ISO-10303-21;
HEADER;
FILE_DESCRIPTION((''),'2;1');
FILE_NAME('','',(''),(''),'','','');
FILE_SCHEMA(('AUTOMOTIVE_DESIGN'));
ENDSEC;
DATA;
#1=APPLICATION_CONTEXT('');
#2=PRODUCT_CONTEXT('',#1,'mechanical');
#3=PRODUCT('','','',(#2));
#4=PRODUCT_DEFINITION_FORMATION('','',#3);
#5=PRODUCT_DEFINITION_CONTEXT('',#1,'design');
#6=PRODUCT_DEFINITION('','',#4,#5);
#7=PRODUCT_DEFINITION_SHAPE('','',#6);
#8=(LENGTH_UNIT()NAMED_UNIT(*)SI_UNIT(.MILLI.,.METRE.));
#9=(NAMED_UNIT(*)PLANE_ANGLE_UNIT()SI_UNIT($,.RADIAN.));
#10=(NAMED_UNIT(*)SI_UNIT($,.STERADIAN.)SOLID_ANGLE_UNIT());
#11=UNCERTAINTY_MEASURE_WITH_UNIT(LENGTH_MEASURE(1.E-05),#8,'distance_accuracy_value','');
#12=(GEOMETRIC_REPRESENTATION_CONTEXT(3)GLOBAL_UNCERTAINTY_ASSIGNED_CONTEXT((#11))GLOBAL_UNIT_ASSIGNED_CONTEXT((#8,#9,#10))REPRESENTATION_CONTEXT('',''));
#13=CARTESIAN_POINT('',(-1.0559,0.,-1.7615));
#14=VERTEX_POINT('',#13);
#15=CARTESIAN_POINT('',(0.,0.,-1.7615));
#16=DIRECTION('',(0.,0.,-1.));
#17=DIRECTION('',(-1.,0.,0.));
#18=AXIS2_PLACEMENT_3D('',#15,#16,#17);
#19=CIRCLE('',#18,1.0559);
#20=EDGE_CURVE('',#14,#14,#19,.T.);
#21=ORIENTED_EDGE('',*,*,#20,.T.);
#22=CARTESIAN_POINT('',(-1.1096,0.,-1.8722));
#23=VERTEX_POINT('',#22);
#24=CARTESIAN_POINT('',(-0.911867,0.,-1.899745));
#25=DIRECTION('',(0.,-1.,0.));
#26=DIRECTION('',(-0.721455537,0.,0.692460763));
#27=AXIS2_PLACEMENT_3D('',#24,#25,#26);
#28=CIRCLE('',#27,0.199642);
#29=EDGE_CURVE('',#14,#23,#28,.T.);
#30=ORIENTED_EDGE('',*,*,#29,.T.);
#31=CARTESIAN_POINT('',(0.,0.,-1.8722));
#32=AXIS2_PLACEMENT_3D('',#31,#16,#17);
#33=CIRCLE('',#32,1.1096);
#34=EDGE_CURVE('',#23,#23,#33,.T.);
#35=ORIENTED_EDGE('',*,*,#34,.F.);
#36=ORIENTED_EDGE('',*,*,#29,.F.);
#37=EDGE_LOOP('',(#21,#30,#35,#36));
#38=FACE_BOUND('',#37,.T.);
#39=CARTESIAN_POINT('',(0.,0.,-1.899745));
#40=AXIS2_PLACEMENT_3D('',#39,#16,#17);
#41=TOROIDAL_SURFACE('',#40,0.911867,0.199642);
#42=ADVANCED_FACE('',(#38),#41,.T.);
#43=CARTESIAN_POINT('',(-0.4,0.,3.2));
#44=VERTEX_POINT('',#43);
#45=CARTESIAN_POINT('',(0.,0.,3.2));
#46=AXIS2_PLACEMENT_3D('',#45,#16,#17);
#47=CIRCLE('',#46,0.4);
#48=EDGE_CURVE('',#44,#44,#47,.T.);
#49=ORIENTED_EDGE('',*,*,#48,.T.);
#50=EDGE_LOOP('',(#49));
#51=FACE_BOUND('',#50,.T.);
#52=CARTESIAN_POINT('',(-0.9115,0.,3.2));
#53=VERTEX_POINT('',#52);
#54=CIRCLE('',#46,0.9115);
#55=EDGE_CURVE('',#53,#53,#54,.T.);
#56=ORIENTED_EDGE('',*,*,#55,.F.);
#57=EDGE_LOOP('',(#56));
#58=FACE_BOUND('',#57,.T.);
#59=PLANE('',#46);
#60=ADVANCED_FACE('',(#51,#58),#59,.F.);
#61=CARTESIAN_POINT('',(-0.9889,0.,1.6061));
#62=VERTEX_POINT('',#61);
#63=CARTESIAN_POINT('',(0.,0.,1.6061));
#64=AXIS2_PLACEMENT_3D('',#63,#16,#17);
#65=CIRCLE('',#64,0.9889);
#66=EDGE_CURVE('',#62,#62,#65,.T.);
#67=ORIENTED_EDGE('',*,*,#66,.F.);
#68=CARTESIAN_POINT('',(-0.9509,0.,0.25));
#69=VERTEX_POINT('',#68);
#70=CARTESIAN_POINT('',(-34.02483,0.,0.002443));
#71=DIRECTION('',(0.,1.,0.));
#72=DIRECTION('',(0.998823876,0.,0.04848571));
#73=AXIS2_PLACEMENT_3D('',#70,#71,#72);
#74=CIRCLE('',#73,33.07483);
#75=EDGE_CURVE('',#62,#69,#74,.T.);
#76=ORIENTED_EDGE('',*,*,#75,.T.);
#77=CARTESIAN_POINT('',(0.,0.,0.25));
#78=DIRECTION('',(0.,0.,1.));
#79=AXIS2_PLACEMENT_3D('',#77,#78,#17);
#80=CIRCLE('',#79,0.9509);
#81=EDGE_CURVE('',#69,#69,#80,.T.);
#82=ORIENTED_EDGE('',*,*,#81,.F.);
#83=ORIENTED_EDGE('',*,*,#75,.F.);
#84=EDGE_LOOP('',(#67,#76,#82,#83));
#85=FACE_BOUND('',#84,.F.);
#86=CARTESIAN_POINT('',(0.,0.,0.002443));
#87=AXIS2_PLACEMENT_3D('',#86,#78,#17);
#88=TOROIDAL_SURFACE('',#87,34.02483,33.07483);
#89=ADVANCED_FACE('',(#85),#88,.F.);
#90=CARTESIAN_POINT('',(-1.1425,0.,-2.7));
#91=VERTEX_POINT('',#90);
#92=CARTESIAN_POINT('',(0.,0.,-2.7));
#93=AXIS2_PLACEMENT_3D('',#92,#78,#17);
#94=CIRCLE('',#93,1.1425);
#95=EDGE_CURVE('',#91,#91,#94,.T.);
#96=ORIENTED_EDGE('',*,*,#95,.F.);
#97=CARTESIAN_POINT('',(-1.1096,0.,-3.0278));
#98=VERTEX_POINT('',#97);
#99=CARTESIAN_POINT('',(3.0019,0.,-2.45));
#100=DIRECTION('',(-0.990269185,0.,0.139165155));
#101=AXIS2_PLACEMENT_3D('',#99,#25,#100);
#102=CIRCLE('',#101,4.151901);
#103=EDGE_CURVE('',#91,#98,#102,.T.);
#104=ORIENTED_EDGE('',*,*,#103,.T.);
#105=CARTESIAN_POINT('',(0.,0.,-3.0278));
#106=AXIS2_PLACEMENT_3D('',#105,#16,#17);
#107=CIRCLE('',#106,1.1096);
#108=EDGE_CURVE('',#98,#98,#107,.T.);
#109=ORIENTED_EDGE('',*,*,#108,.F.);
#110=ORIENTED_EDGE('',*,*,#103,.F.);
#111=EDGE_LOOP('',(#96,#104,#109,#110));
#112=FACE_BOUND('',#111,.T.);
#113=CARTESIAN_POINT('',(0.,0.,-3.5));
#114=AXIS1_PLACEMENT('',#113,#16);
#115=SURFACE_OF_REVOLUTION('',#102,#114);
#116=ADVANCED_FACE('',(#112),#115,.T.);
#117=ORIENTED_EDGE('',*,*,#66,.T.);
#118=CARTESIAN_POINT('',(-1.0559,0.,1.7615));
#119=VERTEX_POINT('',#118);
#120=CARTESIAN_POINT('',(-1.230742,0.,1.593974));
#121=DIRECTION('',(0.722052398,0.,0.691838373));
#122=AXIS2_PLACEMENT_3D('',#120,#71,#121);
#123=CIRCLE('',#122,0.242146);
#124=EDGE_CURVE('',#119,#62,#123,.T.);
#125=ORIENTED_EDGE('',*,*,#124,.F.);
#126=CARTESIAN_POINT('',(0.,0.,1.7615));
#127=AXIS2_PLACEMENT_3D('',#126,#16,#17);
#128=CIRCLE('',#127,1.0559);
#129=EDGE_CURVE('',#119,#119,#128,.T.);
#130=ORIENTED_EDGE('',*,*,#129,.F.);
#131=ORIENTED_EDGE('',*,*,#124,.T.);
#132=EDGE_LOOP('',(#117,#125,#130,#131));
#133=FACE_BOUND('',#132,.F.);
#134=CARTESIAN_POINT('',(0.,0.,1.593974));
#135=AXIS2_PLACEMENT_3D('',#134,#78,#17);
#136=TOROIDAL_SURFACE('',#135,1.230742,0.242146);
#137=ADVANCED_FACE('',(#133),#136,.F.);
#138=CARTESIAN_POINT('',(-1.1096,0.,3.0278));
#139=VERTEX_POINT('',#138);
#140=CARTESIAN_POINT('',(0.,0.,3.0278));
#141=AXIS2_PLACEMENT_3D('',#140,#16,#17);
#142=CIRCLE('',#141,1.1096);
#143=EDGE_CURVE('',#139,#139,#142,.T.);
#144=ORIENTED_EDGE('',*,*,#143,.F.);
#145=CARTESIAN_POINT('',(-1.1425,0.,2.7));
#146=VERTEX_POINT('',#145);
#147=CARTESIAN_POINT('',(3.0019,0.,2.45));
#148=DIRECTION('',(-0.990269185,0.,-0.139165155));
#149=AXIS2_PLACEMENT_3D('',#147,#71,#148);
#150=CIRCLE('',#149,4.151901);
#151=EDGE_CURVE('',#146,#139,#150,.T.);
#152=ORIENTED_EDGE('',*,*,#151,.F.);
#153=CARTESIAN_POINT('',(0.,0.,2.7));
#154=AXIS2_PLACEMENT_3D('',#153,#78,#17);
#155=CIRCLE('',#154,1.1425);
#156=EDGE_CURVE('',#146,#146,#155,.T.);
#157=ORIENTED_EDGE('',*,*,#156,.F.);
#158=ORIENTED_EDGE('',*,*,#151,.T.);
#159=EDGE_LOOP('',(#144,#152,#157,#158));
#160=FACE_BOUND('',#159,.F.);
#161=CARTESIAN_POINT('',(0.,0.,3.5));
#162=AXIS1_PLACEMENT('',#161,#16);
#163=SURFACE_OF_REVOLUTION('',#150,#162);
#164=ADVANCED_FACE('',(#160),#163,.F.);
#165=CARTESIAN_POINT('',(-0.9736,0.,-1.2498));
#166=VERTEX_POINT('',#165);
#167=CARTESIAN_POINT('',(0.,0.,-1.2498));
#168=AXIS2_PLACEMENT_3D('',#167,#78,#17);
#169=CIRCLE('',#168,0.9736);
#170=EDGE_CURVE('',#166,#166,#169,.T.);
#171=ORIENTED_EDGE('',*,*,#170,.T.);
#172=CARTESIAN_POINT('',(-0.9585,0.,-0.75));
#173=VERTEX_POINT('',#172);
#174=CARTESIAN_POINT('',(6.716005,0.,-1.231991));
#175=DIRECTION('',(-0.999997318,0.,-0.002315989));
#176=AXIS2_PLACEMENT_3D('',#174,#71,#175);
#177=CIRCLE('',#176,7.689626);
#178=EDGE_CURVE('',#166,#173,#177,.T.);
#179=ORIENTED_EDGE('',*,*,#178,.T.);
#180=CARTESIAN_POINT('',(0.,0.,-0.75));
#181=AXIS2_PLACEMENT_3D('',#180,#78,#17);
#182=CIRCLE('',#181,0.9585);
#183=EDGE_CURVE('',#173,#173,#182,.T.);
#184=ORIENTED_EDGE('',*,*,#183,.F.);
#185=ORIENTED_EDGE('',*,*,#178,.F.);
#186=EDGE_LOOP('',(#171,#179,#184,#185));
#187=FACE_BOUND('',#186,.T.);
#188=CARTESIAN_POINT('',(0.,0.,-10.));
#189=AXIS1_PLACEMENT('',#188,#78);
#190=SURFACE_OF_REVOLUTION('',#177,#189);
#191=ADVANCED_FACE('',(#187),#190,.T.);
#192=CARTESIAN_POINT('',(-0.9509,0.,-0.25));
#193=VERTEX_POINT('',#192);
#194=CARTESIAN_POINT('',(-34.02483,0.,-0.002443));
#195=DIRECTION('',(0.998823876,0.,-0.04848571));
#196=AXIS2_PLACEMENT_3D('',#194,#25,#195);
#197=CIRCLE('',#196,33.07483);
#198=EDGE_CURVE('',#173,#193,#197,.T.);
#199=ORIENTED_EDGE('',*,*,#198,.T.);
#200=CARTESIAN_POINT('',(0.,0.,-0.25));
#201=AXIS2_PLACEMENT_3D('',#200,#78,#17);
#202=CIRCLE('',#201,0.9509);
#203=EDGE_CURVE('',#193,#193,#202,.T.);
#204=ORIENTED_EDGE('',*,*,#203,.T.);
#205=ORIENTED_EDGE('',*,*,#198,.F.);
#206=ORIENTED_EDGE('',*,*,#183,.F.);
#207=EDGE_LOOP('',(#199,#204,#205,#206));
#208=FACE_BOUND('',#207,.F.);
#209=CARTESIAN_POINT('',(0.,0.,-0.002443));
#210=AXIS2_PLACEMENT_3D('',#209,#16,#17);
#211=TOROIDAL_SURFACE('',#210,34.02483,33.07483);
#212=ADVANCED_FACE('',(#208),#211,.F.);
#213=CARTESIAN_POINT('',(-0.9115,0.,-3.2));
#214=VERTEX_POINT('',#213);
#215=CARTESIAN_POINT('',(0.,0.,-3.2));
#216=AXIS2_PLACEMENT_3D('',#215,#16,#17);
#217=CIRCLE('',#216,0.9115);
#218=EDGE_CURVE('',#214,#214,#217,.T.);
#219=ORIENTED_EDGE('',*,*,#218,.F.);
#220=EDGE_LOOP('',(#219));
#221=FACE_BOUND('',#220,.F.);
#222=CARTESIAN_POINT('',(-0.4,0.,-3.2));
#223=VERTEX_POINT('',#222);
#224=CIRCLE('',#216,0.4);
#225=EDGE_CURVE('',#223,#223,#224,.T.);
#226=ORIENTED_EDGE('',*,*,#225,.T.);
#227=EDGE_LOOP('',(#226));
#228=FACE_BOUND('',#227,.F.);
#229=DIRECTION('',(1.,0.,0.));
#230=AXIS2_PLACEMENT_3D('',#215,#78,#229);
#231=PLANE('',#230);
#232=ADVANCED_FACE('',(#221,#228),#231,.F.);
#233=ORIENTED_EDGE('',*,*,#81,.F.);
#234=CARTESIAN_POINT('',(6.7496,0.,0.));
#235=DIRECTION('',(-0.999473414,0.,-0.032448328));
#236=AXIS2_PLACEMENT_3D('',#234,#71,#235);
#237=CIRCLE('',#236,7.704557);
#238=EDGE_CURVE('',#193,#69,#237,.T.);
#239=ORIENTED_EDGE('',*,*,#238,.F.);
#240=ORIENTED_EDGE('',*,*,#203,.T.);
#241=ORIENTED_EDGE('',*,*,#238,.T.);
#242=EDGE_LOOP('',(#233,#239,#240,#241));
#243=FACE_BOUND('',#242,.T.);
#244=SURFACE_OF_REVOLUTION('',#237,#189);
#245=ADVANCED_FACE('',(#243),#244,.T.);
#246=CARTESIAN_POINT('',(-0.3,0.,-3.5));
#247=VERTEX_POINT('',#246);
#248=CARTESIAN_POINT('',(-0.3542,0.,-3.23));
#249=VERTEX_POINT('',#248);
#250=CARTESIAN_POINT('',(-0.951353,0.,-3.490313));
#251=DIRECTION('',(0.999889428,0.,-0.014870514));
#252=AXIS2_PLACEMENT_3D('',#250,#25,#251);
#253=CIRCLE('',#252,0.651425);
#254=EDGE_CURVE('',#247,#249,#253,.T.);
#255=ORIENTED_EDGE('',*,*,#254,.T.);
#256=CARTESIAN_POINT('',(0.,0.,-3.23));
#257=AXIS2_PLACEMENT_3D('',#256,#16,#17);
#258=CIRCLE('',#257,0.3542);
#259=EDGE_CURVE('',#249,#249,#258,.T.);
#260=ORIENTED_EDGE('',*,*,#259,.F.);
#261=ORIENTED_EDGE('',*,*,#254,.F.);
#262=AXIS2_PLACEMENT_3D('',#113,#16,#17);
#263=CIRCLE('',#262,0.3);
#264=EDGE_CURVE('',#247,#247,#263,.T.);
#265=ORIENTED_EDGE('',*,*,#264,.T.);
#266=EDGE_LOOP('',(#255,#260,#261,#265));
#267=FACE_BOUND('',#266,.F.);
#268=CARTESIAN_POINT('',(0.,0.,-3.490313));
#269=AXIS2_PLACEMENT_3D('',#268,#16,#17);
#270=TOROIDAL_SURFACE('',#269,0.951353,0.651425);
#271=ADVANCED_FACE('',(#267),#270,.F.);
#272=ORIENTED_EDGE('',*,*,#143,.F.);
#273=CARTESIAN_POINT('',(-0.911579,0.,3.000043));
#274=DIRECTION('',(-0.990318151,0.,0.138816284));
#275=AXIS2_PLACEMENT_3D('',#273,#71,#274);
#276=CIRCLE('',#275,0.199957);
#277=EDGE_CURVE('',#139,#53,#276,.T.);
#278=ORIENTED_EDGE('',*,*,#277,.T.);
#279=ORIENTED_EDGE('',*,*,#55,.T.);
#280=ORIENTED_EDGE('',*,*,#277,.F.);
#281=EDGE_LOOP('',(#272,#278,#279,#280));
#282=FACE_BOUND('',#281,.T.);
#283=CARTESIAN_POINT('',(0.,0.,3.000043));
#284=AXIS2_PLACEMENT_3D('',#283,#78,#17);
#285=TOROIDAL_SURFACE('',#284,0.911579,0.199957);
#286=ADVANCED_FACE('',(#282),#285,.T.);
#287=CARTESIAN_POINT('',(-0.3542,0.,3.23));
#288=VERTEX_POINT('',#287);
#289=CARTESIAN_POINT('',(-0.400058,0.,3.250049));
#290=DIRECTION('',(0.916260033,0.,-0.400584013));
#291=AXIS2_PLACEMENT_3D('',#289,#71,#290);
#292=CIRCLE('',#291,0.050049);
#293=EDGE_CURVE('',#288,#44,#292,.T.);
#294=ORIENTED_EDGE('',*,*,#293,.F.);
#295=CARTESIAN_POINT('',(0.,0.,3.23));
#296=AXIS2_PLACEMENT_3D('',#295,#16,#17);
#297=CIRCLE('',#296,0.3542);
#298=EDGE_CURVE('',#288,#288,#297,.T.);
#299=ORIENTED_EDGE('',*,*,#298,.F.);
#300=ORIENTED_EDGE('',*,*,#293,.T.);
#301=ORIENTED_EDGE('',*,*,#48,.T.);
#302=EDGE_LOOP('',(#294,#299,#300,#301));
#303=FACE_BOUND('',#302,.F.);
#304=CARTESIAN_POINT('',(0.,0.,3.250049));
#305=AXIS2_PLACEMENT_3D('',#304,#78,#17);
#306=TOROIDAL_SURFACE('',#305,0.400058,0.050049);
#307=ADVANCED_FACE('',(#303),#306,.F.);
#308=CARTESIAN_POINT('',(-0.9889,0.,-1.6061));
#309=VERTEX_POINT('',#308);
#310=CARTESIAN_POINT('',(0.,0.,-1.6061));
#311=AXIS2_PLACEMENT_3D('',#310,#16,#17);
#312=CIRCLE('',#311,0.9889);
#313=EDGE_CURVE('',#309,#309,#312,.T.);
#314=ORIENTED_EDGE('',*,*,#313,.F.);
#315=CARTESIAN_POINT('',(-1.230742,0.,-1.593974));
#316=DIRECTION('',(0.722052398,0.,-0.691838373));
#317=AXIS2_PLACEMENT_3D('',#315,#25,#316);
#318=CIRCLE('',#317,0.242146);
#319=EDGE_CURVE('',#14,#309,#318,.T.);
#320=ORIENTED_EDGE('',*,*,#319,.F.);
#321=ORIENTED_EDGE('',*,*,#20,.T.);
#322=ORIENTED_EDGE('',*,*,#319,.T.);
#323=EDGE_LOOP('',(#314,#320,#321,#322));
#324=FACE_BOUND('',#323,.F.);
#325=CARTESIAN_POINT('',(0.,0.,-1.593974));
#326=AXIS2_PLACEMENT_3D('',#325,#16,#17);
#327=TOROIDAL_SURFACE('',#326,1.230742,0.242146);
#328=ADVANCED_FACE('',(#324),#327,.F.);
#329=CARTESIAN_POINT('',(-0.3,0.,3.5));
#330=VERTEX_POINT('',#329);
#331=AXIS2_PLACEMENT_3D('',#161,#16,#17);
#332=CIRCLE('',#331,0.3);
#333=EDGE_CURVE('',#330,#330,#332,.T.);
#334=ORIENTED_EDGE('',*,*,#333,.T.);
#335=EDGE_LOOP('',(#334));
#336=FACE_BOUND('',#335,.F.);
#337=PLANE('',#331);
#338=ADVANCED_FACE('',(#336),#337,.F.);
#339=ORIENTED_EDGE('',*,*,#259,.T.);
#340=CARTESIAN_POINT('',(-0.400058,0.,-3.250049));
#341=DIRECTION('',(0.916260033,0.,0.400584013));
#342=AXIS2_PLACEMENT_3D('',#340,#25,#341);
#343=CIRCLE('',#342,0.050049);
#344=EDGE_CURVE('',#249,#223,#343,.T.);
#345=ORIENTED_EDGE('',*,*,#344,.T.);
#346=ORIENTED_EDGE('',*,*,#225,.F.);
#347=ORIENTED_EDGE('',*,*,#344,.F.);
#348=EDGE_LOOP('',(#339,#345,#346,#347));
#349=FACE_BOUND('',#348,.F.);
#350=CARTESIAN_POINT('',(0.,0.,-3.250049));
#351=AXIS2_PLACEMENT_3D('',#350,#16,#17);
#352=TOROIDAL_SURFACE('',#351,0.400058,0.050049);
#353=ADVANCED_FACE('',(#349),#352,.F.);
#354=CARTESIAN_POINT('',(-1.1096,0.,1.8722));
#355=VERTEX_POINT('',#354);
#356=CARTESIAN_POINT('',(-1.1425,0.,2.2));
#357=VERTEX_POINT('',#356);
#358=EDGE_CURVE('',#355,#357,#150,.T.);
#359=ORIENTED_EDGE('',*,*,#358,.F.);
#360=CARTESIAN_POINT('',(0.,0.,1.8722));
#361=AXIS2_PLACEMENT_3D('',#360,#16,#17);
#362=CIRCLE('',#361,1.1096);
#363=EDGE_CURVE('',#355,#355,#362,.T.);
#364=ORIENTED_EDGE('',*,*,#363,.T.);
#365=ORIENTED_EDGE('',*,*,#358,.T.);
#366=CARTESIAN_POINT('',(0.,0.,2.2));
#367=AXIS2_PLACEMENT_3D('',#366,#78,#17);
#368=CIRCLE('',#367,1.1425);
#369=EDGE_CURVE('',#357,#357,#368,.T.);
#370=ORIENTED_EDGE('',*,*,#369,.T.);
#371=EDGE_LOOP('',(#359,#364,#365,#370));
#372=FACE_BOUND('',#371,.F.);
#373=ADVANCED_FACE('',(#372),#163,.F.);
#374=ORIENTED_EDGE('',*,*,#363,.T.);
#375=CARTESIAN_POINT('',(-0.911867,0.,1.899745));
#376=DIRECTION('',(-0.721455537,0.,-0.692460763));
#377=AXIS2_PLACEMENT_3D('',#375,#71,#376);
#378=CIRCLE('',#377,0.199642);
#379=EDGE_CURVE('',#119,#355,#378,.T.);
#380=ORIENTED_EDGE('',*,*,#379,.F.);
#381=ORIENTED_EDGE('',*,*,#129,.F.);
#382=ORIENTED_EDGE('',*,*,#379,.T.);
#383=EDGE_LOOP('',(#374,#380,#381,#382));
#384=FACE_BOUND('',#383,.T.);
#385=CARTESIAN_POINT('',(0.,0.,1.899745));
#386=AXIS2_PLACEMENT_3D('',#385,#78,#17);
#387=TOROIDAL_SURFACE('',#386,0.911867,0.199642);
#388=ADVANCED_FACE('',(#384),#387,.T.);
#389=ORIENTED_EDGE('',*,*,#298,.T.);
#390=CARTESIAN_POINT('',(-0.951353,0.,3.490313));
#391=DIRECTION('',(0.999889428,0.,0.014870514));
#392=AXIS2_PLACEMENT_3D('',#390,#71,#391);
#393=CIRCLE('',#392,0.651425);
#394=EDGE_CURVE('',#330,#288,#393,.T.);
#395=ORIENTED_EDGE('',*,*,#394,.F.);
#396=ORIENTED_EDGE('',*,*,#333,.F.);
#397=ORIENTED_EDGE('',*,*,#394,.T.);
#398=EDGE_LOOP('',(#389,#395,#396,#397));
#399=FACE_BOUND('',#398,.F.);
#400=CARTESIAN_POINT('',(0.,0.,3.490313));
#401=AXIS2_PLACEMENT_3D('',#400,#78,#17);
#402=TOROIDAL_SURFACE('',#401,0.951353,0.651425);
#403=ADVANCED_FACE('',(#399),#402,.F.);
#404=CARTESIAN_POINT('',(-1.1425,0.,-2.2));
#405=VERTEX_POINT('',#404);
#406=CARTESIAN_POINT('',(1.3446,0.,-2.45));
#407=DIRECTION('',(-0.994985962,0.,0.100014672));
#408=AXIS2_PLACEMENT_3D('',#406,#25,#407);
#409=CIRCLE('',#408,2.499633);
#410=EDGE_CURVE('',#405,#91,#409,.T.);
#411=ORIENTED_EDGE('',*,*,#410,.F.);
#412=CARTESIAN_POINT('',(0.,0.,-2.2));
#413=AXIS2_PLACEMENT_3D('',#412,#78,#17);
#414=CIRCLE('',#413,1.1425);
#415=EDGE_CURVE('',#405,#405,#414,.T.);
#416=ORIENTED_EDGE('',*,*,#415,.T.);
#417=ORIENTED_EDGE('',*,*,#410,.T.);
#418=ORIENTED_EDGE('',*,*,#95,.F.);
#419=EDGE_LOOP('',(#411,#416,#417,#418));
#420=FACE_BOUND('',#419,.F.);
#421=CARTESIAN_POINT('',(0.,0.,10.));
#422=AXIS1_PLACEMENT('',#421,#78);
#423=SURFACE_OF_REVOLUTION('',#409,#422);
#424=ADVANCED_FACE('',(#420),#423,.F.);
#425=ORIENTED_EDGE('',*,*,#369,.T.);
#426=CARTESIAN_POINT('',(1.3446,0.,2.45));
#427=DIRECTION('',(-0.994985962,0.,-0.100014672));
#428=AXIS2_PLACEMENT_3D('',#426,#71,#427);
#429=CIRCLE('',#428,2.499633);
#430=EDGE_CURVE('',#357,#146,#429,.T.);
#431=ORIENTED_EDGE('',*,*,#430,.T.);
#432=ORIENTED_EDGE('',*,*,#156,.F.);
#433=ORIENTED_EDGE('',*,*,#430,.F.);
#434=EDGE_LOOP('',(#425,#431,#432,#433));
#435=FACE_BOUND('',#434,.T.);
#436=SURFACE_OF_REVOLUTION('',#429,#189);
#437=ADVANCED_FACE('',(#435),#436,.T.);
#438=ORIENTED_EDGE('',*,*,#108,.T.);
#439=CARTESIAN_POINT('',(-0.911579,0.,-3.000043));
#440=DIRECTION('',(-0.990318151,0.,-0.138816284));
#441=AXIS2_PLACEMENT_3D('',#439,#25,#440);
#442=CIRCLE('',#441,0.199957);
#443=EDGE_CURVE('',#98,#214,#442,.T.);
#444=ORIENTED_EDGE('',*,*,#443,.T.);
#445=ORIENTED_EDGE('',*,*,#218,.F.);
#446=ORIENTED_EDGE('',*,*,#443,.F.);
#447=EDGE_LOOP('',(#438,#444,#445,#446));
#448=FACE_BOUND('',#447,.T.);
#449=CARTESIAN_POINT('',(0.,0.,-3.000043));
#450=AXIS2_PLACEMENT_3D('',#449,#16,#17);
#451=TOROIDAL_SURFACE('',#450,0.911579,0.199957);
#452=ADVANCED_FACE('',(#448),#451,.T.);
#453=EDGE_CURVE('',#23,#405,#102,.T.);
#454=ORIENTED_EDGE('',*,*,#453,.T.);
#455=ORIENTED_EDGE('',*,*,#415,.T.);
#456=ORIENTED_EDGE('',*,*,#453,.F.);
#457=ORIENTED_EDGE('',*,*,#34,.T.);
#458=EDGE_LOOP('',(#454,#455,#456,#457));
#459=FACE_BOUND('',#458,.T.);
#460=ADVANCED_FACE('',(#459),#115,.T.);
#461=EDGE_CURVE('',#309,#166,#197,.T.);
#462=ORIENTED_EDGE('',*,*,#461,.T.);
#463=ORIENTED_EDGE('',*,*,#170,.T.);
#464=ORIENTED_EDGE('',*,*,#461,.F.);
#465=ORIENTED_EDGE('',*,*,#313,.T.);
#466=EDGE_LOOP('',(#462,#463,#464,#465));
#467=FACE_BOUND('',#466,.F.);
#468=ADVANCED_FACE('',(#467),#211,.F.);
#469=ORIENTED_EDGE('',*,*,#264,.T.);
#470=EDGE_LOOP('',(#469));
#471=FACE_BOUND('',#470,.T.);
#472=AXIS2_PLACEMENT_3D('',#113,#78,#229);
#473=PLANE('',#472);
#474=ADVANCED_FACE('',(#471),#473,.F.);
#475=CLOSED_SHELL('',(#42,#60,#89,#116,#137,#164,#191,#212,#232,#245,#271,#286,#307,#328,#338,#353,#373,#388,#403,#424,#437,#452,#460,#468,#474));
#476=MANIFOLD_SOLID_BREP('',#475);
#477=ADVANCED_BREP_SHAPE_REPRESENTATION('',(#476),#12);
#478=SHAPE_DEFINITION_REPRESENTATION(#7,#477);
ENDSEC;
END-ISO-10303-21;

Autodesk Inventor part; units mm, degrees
ref_plane "YZ Plane" through (0, 0, 0) normal (1, 0, 0) x (0, 1, 0)
ref_plane "XZ Plane" through (0, 0, 0) normal (0, 1, 0) x (-1, 0, 0)
ref_plane "XY Plane" through (0, 0, 0) normal (0, 0, 1) x (1, 0, 0)
sketch "Skizze5" plane through (0, 0, 0) normal (0, 1, 0) x (-1, 0, 0)
  line L0 (0, 4.4678) -> (0, 0)
  line L1 (0.95, 0) -> (0, 0)
  line L2 (0.4, 3.2) -> (0.9115, 3.2)
  line L3 (0.9115, 1.7) -> (0.4352, 1.7) construction
  arc A0 (1.1096, 3.0278) -> (0.9115, 3.2) centre (0.9115, 3) ccw
  arc A1 (0.9115, 1.7) -> (1.0559, 1.7615) centre (0.9115, 1.9) ccw construction
  arc A2 (1.1096, 1.8722) -> (1.1096, 3.0278) centre (-3.0019, 2.45) ccw
  line L4 (1.15, 2.45) -> (-3.0019, 2.45) construction
  line L5 (0.9115, 1.9) -> (0.9115, 3) construction
  arc A3 (1.0559, 1.7615) -> (1.1096, 1.8722) centre (0.9115, 1.9) ccw
  arc A4 (0.3542, 3.23) -> (0.4, 3.2) centre (0.4, 3.25) ccw
  line L6 (0.9115, 3) -> (1.1096, 3.0278) construction
  arc A5 (1.0559, 1.7615) -> (0.9889, 1.6061) centre (1.2301, 1.5944) ccw
  line L7 (0.3, 3.5) -> (0, 3.5)
  line L8 (0, 3.5) -> (0, 0)
  arc A6 (0.3, 3.5) -> (0.3542, 3.23) centre (0.9523, 3.4904) ccw
  arc A7 (0.9889, 1.6061) -> (0.95, 0) centre (34.092, 0) ccw
  line L9 (34.092, 0) -> (0.95, 0) construction
  dimension "d12" = 1.5
  dimension "d14" = 0.2
  dimension "d16" = 1.9
  dimension "d17" = 2.3
  dimension "d18" = 0.75
  dimension "d21" = 98
  dimension "d22" = 0.3
  dimension "d23" = 3.2
revolve "Umdrehung1" add sketch "Skizze5" angle 360 about axis through (0, 0, 4.4678) along (0, 0, -1)
mirror "Spiegeln2" about plane through (0, 0, 0) normal (0, 0, 1) of "Umdrehung1"
sketch "Skizze6" plane through (0, 0, 0) normal (0, 1, 0) x (-1, 0, 0)
  arc A0 (1.1096, 1.8722) -> (1.1096, 3.0278) centre (-3.0019, 2.45) ccw projected
  arc A1 (1.1425, 2.2) -> (1.1425, 2.7) centre (-1.3446, 2.45) ccw
  line L0 (-3.0019, 2.45) -> (-1.3446, 2.45)
  line L1 (0, -4.9) -> (0, 4.9) projected
  point P0 (0, 0)
  dimension "d25" = 0.5
  dimension "d26" = 0.005
revolve "Umdrehung2" add sketch "Skizze6" angle 360 about axis through (0, 0, -10) along (0, 0, 1)
mirror "Spiegeln3" about plane through (0, 0, 0) normal (0, 0, 1) of "Umdrehung2"
sketch "Skizze7" plane through (0, 0, 0) normal (0, 1, 0) x (-1, 0, 0)
  arc A0 (0.9889, 1.6061) -> (0.9889, -1.6061) centre (34.092, 0) ccw projected
  arc A1 (0.9509, -0.25) -> (0.9509, 0.25) centre (-6.7496, 0) ccw
  line L0 (-6.7496, 0) -> (0, 0)
  line L1 (0.9509, 0.25) -> (0.9509, -0.25) construction
  line L2 (0, -4.9) -> (0, 4.9) projected
  dimension "d28" = 0.005
  dimension "d29" = 0.5
revolve "Umdrehung3" add sketch "Skizze7" angle 360 about axis through (0, 0, -10) along (0, 0, 1)
sketch "Skizze8" plane through (0, 0, 0) normal (0, 1, 0) x (-1, 0, 0)
  arc A0 (0.9509, -0.25) -> (0.9889, -1.6061) centre (34.092, 0) ccw projected
  line L0 (0, 0) -> (-1.7052, 0)
  line L1 (-6.731, -1.2322) -> (0.235, -1.2322)
  arc A1 (0.9736, -1.2498) -> (0.9585, -0.75) centre (-6.731, -1.2322) ccw
  line L2 (0.9736, -1.2498) -> (0.9585, -0.75) construction
  line L3 (0, -4.9) -> (0, 4.9) projected
  dimension "d32" = 0.005
  dimension "d34" = 0.5
  dimension "d35" = 0.5
revolve "Umdrehung4" add sketch "Skizze8" angle 360 about axis through (0, 0, -10) along (0, 0, 1)
equation "\"d18\" = 0.5 * d12"
properties part number "HVU_resistor_5M1_(VR25000005104JA100)"
